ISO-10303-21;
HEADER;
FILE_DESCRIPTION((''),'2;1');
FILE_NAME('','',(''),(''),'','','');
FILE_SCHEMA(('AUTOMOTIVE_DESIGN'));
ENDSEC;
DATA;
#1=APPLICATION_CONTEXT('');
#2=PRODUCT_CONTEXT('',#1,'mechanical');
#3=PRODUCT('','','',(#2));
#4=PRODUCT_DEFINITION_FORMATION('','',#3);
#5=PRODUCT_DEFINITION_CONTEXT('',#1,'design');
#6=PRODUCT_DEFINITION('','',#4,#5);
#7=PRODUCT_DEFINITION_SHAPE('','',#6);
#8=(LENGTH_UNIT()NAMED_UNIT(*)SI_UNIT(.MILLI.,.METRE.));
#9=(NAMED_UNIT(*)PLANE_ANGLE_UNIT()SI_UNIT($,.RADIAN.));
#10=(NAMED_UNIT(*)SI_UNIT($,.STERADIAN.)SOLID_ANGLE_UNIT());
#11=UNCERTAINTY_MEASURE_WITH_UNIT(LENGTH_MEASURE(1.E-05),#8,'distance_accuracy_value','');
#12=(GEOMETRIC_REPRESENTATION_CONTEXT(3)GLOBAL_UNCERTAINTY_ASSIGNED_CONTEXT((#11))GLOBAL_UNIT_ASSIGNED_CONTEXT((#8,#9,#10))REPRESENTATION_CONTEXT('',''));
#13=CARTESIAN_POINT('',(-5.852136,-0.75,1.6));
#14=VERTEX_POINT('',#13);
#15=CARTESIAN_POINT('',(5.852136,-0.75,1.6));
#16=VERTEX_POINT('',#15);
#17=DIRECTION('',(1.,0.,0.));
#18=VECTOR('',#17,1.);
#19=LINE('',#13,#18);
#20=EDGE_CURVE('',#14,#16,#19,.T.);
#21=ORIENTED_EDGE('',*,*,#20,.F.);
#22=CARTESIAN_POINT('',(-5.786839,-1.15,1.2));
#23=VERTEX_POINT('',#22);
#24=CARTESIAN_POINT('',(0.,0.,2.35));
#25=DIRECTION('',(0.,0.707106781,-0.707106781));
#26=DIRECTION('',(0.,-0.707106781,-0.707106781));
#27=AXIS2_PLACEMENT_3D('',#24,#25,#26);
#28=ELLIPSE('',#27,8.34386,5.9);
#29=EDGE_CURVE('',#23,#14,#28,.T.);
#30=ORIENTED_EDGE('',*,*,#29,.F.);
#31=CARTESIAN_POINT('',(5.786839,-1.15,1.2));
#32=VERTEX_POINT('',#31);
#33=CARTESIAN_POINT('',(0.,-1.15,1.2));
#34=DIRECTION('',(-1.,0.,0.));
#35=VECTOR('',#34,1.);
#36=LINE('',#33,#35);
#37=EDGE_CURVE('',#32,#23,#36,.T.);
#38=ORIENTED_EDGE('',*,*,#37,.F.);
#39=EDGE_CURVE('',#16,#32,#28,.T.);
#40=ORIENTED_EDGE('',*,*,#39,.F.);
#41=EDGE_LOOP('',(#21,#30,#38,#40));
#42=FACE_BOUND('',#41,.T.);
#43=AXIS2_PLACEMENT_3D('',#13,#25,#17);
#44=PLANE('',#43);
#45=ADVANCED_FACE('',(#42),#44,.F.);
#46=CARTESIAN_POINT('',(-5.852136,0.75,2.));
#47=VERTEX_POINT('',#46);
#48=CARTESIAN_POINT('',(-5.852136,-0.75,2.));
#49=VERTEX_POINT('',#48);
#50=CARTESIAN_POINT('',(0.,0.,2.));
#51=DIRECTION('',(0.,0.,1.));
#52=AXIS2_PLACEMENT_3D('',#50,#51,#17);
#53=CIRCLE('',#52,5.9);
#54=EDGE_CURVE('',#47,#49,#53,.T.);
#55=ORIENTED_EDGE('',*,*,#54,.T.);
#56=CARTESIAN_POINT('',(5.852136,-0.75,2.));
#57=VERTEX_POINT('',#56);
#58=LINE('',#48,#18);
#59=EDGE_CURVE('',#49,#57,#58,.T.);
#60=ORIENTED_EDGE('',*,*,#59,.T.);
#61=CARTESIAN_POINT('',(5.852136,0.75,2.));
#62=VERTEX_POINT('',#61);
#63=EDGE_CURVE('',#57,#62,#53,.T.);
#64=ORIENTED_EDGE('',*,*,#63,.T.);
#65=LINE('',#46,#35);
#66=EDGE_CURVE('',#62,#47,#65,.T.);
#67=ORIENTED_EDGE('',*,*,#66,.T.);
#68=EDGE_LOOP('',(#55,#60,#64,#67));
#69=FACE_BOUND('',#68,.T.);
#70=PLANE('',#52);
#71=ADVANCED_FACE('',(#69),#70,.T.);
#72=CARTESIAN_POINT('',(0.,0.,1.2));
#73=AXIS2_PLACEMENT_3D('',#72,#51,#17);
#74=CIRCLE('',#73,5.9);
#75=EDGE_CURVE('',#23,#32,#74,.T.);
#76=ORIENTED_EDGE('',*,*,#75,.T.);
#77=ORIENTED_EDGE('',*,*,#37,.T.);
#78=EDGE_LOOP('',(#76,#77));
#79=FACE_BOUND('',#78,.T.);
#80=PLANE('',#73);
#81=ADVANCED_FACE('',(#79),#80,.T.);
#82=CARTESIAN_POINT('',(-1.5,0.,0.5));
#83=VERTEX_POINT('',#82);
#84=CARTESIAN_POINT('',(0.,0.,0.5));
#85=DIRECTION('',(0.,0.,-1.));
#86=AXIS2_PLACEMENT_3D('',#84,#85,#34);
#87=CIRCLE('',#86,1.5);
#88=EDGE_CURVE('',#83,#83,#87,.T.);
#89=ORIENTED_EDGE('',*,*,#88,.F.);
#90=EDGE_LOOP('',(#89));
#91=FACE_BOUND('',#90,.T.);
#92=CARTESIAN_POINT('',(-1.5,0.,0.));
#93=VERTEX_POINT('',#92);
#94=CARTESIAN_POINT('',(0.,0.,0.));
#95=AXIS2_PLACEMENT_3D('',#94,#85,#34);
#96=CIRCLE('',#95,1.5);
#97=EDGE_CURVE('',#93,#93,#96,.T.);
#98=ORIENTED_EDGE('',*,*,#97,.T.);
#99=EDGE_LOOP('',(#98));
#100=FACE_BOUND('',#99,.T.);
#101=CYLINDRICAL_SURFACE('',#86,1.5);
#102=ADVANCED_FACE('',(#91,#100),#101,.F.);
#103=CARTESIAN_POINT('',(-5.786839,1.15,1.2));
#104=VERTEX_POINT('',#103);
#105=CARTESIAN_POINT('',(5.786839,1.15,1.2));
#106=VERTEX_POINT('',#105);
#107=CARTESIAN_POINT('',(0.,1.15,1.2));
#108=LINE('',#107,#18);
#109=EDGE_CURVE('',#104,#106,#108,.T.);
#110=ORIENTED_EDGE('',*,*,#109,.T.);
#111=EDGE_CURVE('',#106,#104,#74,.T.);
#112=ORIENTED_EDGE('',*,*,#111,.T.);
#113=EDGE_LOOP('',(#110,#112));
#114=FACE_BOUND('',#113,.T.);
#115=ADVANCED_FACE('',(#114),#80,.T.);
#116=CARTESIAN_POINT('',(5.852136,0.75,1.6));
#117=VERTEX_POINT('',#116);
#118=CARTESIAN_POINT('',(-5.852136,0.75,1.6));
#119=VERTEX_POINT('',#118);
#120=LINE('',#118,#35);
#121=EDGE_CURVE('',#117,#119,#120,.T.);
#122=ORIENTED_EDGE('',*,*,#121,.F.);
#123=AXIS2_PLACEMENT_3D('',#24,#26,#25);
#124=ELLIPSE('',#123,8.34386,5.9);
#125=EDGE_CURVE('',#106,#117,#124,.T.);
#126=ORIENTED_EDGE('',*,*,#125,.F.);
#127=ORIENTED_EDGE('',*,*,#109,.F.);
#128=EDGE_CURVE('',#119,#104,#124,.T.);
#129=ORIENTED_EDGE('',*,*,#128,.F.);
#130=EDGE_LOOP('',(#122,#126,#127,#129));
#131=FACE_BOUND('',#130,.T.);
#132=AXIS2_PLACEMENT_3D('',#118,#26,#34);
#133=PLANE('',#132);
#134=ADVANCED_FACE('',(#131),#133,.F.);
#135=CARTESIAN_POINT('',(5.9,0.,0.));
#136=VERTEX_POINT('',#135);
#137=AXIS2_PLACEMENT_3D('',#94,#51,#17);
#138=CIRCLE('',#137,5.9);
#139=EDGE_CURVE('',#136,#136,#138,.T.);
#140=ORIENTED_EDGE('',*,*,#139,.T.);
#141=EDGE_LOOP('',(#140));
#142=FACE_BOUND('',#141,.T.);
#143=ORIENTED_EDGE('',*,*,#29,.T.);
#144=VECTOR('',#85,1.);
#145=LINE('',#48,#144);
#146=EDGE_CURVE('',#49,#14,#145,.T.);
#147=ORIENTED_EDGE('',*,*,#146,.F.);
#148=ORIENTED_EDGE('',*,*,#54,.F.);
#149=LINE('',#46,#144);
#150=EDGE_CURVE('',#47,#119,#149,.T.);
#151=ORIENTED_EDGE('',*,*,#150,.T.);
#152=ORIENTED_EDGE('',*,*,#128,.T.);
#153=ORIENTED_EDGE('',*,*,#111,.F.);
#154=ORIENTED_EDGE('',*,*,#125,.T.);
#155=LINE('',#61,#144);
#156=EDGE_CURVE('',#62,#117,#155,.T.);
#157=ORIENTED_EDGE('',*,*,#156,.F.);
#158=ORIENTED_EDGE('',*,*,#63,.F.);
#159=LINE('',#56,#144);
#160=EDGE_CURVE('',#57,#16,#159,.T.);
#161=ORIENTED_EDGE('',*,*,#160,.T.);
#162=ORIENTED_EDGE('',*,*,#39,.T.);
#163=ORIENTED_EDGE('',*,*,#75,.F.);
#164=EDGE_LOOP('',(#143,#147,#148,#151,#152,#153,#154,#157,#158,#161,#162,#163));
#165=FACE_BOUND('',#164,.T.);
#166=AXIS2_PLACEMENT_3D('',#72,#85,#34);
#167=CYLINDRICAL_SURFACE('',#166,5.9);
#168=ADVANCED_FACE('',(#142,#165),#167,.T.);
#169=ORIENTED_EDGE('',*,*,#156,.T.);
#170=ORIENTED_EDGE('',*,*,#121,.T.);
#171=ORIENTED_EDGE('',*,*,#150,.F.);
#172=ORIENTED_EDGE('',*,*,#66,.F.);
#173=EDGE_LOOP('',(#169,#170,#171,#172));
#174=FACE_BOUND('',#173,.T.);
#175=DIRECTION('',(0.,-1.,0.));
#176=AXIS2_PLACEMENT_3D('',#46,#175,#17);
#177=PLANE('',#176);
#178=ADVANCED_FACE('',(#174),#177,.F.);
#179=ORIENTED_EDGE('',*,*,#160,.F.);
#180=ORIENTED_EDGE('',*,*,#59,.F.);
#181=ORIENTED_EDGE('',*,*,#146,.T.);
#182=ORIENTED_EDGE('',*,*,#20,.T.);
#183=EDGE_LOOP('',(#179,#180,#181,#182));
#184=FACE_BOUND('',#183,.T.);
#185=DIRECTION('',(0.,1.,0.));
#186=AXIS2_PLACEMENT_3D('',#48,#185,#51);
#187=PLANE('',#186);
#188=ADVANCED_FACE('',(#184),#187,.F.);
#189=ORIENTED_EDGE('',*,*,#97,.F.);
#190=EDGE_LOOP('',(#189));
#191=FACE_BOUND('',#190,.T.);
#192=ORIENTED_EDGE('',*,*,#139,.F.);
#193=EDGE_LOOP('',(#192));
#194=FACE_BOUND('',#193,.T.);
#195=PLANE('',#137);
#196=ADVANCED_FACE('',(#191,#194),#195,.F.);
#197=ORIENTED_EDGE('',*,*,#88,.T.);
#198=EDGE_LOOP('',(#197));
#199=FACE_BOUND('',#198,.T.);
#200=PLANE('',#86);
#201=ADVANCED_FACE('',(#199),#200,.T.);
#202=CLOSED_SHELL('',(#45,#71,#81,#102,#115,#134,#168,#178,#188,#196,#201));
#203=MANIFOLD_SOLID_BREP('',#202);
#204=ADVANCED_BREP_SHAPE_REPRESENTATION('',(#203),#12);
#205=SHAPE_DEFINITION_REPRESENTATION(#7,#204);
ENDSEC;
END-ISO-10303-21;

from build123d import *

# Parameters (mm, degrees)
SKETCH1_R           = 5.9
BOSS_EXTRUDE1_DEPTH = 1.2
BOSS_EXTRUDE2_DEPTH = 0.8
CHAMFER1_SIZE       = 0.4
SKETCH3_R           = 1.5
CUT_EXTRUDE1_DEPTH  = 0.5


with BuildPart() as part:
    # Sketch1 → Boss-Extrude1 (new body)
    with BuildSketch(Plane.XY):
        Circle(SKETCH1_R)
    extrude(amount=BOSS_EXTRUDE1_DEPTH)

    # Sketch2 → Boss-Extrude2 (add)
    with BuildSketch(Plane.XY.offset(1.2)):
        with BuildLine():
            Line((-5.852136362, -0.75), (5.852136362, -0.75))
            ThreePointArc((5.852136362, -0.75), (5.9, 0), (5.852136362, 0.75))
            Line((5.852136362, 0.75), (-5.852136362, 0.75))
            ThreePointArc((-5.852136362, 0.75), (-5.9, 0), (-5.852136362, -0.75))
        make_face()
    extrude(amount=BOSS_EXTRUDE2_DEPTH)

    # Chamfer1
    # the kernel refuses this chamfer: 0.4 mm, written as the material it adds along each edge
    with BuildSketch(Plane(origin=(6.880809557, 0.75, 1.2), x_dir=(0, 0.9996219169112968, -0.02749587661058628), z_dir=(-1, 0, 0))) as chamfer1_piece_1_section:
        Polygon((CHAMFER1_SIZE * 0.999621916911, -CHAMFER1_SIZE * 0.0274958766106), (-CHAMFER1_SIZE * 0.0274958766106, -CHAMFER1_SIZE * 0.999621916911), (0, 0), align=None)
    chamfer1_piece_1 = extrude(amount=13.761619114, mode=Mode.PRIVATE)
    chamfer1_piece_1 = chamfer1_piece_1 & Plane(origin=(0, 0, 1.33206261), x_dir=(1, 0, 0), z_dir=(0, 0, -1)) * Cylinder(5.9, 30, mode=Mode.PRIVATE)
    add(chamfer1_piece_1)
    with BuildSketch(Plane(origin=(-6.880809557, -0.75, 1.2), x_dir=(0, -0.9996219169112968, -0.027495876610586285), z_dir=(1, 0, 0))) as chamfer1_piece_2_section:
        Polygon((CHAMFER1_SIZE * 0.999621916911, -CHAMFER1_SIZE * 0.0274958766106), (-CHAMFER1_SIZE * 0.0274958766106, -CHAMFER1_SIZE * 0.999621916911), (0, 0), align=None)
    chamfer1_piece_2 = extrude(amount=13.761619114, mode=Mode.PRIVATE)
    chamfer1_piece_2 = chamfer1_piece_2 & Plane(origin=(0, 0, 1.33206261), x_dir=(1, 0, 0), z_dir=(0, 0, -1)) * Cylinder(5.9, 30, mode=Mode.PRIVATE)
    add(chamfer1_piece_2)

    # Sketch3 → Cut-Extrude1 (cut)
    with BuildSketch(Plane(origin=(0, 0, 0), x_dir=(-1, 0, 0), z_dir=(0, 0, -1))):
        Circle(SKETCH3_R)
    extrude(amount=-CUT_EXTRUDE1_DEPTH, mode=Mode.SUBTRACT)


solid = part.part
